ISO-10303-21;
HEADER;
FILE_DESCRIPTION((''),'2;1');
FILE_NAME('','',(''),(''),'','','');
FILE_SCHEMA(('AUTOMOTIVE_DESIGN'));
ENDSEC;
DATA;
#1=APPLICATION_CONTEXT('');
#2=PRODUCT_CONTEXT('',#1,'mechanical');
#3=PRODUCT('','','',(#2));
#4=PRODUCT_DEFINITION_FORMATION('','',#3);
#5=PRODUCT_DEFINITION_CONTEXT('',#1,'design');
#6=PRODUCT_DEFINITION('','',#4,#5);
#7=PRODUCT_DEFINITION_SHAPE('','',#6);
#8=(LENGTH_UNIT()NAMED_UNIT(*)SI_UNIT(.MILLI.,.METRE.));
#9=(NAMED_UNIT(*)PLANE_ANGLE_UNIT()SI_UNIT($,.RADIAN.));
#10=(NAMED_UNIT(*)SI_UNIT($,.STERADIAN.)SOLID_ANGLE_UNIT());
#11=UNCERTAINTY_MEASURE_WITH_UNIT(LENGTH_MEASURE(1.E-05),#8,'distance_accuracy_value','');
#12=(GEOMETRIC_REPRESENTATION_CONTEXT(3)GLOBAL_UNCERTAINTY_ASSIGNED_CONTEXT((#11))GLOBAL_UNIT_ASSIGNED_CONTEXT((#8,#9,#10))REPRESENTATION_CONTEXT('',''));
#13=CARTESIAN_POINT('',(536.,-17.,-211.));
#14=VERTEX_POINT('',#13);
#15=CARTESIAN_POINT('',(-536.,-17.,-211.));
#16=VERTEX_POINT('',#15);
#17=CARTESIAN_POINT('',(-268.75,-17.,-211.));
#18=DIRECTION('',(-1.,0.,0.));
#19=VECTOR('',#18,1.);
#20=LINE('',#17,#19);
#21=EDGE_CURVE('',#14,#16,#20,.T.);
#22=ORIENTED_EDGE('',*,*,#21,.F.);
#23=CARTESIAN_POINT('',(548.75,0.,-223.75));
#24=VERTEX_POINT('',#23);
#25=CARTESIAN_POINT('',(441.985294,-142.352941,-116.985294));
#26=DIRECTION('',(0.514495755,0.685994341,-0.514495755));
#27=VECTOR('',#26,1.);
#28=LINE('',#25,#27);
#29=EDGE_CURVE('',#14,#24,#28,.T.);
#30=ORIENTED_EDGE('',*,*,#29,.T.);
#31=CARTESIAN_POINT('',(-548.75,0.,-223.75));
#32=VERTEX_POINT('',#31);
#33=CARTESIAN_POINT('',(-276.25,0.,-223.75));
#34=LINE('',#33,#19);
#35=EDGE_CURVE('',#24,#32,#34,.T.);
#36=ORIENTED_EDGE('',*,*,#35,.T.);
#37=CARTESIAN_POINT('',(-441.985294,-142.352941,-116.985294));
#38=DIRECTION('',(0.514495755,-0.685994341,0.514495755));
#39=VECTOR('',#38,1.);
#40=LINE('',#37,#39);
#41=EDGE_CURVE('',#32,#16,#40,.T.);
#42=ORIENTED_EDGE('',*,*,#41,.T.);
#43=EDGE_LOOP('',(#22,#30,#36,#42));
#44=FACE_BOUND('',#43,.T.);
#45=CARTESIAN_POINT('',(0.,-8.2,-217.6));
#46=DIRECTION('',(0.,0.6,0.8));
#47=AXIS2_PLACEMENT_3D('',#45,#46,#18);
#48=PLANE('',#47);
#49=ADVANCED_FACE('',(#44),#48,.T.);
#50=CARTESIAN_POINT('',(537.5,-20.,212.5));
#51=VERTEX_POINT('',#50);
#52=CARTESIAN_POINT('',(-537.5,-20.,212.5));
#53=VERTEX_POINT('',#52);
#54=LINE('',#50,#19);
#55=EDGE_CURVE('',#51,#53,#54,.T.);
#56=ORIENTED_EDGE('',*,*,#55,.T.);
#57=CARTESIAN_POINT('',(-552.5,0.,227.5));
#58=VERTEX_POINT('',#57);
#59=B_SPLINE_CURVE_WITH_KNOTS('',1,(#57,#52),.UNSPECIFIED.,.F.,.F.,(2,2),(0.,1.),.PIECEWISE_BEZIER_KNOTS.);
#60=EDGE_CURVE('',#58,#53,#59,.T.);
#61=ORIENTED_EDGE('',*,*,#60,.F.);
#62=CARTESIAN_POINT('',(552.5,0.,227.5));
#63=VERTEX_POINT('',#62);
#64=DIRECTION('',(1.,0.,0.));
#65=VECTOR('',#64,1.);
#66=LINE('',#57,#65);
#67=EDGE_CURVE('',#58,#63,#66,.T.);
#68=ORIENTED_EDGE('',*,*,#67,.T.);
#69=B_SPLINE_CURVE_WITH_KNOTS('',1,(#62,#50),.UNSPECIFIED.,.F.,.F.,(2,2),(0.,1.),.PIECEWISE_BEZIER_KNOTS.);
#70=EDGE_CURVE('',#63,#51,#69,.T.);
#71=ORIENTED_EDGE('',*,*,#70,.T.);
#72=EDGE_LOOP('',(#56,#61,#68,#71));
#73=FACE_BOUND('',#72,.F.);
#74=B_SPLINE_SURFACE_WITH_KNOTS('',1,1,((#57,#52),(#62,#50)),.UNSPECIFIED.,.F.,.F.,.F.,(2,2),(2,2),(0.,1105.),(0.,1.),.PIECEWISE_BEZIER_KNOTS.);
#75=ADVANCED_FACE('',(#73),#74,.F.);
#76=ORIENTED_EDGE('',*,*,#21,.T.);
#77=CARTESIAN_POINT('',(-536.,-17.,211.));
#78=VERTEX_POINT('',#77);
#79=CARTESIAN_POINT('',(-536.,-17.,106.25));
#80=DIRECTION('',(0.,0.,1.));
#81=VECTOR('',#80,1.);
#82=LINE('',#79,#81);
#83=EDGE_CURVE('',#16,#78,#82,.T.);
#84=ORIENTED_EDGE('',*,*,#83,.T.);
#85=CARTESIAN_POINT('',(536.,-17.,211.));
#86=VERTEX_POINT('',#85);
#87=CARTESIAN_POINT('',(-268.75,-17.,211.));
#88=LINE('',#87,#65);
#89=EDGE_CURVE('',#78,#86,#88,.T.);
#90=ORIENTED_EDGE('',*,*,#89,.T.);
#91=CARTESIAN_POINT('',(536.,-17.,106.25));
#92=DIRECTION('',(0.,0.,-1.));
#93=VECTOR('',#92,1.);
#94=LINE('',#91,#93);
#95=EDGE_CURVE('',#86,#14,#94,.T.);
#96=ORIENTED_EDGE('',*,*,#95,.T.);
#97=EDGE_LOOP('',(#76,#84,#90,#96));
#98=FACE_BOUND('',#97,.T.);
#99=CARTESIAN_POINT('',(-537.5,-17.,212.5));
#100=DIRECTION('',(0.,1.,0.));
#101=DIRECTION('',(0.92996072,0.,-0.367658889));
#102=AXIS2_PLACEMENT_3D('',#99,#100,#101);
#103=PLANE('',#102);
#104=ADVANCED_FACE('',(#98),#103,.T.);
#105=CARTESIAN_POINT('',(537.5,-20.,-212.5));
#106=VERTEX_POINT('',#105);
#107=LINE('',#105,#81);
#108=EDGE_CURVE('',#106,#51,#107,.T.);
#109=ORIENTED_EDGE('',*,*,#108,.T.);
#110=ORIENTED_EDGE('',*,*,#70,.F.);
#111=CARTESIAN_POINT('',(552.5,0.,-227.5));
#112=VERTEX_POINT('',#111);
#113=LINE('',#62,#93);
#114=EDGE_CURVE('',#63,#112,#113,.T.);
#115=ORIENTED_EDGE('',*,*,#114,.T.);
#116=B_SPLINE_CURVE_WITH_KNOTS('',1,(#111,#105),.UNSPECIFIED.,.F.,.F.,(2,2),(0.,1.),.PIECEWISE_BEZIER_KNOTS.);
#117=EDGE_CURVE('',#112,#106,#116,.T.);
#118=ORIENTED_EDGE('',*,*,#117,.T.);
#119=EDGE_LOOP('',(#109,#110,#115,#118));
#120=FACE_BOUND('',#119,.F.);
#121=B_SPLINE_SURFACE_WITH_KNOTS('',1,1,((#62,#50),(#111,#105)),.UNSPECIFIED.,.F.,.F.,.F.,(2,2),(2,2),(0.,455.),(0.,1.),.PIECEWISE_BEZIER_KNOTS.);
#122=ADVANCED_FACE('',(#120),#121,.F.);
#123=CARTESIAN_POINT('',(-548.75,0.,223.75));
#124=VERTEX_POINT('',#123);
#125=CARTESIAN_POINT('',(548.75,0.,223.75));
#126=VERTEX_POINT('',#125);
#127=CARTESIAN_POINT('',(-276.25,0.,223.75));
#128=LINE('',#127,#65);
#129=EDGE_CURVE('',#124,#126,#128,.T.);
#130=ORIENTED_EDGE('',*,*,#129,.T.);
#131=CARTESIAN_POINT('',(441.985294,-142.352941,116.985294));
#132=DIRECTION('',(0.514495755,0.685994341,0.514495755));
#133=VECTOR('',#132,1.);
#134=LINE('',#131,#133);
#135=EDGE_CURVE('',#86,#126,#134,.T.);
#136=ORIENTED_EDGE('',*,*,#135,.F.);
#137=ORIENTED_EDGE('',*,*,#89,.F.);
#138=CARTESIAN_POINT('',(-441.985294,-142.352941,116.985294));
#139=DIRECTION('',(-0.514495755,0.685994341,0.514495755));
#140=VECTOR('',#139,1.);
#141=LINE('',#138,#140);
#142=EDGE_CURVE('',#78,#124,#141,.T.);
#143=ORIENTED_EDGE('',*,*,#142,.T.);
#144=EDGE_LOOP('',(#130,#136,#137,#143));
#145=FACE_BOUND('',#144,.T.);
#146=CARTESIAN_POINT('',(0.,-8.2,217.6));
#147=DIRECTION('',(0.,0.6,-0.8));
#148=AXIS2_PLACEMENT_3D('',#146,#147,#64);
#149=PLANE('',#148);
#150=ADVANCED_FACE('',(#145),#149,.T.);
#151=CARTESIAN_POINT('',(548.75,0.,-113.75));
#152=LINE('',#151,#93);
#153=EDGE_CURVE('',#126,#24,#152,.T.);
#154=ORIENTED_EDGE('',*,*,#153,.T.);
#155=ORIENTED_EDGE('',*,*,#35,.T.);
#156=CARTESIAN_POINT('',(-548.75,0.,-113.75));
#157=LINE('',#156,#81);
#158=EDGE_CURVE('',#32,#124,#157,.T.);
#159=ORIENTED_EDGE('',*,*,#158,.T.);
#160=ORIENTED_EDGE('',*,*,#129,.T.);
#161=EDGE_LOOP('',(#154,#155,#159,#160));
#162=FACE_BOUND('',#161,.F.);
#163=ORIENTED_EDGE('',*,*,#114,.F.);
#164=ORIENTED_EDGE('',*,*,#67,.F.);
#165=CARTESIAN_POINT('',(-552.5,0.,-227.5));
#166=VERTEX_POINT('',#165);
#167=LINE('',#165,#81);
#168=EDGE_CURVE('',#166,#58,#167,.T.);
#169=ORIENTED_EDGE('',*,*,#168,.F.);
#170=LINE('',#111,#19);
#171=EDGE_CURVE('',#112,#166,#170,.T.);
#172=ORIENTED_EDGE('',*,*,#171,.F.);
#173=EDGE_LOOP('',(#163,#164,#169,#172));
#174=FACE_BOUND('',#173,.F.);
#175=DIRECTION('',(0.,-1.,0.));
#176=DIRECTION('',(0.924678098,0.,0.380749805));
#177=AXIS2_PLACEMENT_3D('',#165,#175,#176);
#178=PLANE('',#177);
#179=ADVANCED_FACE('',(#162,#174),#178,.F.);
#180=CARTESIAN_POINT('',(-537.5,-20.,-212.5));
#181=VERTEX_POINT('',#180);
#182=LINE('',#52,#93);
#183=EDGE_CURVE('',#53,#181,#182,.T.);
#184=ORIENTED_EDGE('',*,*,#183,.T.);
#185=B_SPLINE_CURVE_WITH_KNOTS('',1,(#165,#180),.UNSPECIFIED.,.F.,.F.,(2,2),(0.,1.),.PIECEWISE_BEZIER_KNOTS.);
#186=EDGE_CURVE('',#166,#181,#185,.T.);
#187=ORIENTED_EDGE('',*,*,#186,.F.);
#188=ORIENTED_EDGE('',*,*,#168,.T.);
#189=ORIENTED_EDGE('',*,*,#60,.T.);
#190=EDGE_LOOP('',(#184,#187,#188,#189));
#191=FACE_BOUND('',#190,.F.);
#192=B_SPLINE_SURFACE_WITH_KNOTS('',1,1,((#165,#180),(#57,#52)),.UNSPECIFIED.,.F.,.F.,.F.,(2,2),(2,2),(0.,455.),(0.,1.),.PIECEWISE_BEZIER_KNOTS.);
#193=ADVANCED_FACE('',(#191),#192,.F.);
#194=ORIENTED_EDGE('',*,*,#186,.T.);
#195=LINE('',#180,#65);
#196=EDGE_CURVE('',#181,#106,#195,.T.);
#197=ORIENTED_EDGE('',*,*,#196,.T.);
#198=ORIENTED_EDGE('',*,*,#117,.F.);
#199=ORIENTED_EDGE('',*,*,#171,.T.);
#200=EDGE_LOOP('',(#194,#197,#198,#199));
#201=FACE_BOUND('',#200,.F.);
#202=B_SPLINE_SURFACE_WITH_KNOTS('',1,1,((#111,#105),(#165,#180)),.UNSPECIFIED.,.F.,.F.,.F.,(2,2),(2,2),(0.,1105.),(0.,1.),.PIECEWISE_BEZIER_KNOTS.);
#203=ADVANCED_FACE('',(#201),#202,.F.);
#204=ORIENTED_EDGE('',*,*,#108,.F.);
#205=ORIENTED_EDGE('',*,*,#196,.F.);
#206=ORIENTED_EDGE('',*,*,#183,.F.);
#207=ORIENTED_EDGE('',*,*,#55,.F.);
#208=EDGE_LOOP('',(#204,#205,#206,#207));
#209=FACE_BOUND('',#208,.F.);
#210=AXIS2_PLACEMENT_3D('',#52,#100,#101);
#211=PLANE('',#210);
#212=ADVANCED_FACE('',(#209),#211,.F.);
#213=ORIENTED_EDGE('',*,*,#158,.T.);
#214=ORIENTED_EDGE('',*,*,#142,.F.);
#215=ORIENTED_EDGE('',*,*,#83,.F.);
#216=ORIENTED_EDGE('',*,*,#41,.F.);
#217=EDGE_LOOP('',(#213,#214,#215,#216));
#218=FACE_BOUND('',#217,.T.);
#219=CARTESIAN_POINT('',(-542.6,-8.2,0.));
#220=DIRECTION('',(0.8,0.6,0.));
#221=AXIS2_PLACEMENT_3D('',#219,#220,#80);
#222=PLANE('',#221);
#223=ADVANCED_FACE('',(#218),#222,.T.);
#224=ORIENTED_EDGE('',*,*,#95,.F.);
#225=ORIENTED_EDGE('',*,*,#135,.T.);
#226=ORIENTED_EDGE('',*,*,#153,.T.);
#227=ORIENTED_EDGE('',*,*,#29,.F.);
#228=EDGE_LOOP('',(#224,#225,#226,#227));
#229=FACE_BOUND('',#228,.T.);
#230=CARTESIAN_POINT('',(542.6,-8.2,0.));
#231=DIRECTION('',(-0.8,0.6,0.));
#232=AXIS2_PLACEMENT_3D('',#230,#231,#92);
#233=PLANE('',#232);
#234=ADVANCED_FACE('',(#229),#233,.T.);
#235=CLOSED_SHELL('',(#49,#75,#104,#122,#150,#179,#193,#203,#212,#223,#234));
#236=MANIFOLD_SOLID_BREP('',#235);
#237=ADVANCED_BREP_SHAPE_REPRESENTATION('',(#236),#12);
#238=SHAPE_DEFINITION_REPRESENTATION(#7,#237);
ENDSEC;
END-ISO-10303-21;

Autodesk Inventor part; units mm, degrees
ref_plane "YZ Plane" through (0, 0, 0) normal (1, 0, 0) x (0, 1, 0)
ref_plane "XY Plane" through (0, 0, 0) normal (0, 0, 1) x (1, 0, 0)
sketch "Sketch1" plane through (0, 0, 0) normal (0, 1, 0) x (-1, 0, 0)
  line L0 (552.5, 227.5) -> (-552.5, 227.5)
  line L1 (-552.5, 227.5) -> (-552.5, -227.5)
  line L2 (-552.5, -227.5) -> (552.5, -227.5)
  line L3 (552.5, -227.5) -> (552.5, 227.5)
  line L4 (552.5, 227.5) -> (-552.5, -227.5) construction
  line L5 (-552.5, 227.5) -> (552.5, -227.5) construction
  point P0 (0, 0)
  dimension "d0" = 1105
  dimension "d1" = 455
ref_plane "Work Plane1" through (0, -20, 0) normal (0, 1, 0) x (-1, 0, 0)
sketch "Sketch2" plane through (0, -20, 0) normal (0, 1, 0) x (-1, 0, 0)
  line L0 (-537.5, 212.5) -> (537.5, 212.5)
  line L1 (537.5, 212.5) -> (537.5, -212.5)
  line L2 (537.5, -212.5) -> (-537.5, -212.5)
  line L3 (-537.5, -212.5) -> (-537.5, 212.5)
  line L4 (-537.5, 212.5) -> (537.5, -212.5) construction
  line L5 (537.5, 212.5) -> (-537.5, -212.5) construction
  point P0 (0, 0)
  dimension "d3" = 1075
  dimension "d4" = 425
loft "Loft1" add profiles "Sketch1", "Sketch2"
shell "Shell1" thickness 3 removed faces 1 at (184.1667, 0, 75.8333)
properties part number "ChipTray"
